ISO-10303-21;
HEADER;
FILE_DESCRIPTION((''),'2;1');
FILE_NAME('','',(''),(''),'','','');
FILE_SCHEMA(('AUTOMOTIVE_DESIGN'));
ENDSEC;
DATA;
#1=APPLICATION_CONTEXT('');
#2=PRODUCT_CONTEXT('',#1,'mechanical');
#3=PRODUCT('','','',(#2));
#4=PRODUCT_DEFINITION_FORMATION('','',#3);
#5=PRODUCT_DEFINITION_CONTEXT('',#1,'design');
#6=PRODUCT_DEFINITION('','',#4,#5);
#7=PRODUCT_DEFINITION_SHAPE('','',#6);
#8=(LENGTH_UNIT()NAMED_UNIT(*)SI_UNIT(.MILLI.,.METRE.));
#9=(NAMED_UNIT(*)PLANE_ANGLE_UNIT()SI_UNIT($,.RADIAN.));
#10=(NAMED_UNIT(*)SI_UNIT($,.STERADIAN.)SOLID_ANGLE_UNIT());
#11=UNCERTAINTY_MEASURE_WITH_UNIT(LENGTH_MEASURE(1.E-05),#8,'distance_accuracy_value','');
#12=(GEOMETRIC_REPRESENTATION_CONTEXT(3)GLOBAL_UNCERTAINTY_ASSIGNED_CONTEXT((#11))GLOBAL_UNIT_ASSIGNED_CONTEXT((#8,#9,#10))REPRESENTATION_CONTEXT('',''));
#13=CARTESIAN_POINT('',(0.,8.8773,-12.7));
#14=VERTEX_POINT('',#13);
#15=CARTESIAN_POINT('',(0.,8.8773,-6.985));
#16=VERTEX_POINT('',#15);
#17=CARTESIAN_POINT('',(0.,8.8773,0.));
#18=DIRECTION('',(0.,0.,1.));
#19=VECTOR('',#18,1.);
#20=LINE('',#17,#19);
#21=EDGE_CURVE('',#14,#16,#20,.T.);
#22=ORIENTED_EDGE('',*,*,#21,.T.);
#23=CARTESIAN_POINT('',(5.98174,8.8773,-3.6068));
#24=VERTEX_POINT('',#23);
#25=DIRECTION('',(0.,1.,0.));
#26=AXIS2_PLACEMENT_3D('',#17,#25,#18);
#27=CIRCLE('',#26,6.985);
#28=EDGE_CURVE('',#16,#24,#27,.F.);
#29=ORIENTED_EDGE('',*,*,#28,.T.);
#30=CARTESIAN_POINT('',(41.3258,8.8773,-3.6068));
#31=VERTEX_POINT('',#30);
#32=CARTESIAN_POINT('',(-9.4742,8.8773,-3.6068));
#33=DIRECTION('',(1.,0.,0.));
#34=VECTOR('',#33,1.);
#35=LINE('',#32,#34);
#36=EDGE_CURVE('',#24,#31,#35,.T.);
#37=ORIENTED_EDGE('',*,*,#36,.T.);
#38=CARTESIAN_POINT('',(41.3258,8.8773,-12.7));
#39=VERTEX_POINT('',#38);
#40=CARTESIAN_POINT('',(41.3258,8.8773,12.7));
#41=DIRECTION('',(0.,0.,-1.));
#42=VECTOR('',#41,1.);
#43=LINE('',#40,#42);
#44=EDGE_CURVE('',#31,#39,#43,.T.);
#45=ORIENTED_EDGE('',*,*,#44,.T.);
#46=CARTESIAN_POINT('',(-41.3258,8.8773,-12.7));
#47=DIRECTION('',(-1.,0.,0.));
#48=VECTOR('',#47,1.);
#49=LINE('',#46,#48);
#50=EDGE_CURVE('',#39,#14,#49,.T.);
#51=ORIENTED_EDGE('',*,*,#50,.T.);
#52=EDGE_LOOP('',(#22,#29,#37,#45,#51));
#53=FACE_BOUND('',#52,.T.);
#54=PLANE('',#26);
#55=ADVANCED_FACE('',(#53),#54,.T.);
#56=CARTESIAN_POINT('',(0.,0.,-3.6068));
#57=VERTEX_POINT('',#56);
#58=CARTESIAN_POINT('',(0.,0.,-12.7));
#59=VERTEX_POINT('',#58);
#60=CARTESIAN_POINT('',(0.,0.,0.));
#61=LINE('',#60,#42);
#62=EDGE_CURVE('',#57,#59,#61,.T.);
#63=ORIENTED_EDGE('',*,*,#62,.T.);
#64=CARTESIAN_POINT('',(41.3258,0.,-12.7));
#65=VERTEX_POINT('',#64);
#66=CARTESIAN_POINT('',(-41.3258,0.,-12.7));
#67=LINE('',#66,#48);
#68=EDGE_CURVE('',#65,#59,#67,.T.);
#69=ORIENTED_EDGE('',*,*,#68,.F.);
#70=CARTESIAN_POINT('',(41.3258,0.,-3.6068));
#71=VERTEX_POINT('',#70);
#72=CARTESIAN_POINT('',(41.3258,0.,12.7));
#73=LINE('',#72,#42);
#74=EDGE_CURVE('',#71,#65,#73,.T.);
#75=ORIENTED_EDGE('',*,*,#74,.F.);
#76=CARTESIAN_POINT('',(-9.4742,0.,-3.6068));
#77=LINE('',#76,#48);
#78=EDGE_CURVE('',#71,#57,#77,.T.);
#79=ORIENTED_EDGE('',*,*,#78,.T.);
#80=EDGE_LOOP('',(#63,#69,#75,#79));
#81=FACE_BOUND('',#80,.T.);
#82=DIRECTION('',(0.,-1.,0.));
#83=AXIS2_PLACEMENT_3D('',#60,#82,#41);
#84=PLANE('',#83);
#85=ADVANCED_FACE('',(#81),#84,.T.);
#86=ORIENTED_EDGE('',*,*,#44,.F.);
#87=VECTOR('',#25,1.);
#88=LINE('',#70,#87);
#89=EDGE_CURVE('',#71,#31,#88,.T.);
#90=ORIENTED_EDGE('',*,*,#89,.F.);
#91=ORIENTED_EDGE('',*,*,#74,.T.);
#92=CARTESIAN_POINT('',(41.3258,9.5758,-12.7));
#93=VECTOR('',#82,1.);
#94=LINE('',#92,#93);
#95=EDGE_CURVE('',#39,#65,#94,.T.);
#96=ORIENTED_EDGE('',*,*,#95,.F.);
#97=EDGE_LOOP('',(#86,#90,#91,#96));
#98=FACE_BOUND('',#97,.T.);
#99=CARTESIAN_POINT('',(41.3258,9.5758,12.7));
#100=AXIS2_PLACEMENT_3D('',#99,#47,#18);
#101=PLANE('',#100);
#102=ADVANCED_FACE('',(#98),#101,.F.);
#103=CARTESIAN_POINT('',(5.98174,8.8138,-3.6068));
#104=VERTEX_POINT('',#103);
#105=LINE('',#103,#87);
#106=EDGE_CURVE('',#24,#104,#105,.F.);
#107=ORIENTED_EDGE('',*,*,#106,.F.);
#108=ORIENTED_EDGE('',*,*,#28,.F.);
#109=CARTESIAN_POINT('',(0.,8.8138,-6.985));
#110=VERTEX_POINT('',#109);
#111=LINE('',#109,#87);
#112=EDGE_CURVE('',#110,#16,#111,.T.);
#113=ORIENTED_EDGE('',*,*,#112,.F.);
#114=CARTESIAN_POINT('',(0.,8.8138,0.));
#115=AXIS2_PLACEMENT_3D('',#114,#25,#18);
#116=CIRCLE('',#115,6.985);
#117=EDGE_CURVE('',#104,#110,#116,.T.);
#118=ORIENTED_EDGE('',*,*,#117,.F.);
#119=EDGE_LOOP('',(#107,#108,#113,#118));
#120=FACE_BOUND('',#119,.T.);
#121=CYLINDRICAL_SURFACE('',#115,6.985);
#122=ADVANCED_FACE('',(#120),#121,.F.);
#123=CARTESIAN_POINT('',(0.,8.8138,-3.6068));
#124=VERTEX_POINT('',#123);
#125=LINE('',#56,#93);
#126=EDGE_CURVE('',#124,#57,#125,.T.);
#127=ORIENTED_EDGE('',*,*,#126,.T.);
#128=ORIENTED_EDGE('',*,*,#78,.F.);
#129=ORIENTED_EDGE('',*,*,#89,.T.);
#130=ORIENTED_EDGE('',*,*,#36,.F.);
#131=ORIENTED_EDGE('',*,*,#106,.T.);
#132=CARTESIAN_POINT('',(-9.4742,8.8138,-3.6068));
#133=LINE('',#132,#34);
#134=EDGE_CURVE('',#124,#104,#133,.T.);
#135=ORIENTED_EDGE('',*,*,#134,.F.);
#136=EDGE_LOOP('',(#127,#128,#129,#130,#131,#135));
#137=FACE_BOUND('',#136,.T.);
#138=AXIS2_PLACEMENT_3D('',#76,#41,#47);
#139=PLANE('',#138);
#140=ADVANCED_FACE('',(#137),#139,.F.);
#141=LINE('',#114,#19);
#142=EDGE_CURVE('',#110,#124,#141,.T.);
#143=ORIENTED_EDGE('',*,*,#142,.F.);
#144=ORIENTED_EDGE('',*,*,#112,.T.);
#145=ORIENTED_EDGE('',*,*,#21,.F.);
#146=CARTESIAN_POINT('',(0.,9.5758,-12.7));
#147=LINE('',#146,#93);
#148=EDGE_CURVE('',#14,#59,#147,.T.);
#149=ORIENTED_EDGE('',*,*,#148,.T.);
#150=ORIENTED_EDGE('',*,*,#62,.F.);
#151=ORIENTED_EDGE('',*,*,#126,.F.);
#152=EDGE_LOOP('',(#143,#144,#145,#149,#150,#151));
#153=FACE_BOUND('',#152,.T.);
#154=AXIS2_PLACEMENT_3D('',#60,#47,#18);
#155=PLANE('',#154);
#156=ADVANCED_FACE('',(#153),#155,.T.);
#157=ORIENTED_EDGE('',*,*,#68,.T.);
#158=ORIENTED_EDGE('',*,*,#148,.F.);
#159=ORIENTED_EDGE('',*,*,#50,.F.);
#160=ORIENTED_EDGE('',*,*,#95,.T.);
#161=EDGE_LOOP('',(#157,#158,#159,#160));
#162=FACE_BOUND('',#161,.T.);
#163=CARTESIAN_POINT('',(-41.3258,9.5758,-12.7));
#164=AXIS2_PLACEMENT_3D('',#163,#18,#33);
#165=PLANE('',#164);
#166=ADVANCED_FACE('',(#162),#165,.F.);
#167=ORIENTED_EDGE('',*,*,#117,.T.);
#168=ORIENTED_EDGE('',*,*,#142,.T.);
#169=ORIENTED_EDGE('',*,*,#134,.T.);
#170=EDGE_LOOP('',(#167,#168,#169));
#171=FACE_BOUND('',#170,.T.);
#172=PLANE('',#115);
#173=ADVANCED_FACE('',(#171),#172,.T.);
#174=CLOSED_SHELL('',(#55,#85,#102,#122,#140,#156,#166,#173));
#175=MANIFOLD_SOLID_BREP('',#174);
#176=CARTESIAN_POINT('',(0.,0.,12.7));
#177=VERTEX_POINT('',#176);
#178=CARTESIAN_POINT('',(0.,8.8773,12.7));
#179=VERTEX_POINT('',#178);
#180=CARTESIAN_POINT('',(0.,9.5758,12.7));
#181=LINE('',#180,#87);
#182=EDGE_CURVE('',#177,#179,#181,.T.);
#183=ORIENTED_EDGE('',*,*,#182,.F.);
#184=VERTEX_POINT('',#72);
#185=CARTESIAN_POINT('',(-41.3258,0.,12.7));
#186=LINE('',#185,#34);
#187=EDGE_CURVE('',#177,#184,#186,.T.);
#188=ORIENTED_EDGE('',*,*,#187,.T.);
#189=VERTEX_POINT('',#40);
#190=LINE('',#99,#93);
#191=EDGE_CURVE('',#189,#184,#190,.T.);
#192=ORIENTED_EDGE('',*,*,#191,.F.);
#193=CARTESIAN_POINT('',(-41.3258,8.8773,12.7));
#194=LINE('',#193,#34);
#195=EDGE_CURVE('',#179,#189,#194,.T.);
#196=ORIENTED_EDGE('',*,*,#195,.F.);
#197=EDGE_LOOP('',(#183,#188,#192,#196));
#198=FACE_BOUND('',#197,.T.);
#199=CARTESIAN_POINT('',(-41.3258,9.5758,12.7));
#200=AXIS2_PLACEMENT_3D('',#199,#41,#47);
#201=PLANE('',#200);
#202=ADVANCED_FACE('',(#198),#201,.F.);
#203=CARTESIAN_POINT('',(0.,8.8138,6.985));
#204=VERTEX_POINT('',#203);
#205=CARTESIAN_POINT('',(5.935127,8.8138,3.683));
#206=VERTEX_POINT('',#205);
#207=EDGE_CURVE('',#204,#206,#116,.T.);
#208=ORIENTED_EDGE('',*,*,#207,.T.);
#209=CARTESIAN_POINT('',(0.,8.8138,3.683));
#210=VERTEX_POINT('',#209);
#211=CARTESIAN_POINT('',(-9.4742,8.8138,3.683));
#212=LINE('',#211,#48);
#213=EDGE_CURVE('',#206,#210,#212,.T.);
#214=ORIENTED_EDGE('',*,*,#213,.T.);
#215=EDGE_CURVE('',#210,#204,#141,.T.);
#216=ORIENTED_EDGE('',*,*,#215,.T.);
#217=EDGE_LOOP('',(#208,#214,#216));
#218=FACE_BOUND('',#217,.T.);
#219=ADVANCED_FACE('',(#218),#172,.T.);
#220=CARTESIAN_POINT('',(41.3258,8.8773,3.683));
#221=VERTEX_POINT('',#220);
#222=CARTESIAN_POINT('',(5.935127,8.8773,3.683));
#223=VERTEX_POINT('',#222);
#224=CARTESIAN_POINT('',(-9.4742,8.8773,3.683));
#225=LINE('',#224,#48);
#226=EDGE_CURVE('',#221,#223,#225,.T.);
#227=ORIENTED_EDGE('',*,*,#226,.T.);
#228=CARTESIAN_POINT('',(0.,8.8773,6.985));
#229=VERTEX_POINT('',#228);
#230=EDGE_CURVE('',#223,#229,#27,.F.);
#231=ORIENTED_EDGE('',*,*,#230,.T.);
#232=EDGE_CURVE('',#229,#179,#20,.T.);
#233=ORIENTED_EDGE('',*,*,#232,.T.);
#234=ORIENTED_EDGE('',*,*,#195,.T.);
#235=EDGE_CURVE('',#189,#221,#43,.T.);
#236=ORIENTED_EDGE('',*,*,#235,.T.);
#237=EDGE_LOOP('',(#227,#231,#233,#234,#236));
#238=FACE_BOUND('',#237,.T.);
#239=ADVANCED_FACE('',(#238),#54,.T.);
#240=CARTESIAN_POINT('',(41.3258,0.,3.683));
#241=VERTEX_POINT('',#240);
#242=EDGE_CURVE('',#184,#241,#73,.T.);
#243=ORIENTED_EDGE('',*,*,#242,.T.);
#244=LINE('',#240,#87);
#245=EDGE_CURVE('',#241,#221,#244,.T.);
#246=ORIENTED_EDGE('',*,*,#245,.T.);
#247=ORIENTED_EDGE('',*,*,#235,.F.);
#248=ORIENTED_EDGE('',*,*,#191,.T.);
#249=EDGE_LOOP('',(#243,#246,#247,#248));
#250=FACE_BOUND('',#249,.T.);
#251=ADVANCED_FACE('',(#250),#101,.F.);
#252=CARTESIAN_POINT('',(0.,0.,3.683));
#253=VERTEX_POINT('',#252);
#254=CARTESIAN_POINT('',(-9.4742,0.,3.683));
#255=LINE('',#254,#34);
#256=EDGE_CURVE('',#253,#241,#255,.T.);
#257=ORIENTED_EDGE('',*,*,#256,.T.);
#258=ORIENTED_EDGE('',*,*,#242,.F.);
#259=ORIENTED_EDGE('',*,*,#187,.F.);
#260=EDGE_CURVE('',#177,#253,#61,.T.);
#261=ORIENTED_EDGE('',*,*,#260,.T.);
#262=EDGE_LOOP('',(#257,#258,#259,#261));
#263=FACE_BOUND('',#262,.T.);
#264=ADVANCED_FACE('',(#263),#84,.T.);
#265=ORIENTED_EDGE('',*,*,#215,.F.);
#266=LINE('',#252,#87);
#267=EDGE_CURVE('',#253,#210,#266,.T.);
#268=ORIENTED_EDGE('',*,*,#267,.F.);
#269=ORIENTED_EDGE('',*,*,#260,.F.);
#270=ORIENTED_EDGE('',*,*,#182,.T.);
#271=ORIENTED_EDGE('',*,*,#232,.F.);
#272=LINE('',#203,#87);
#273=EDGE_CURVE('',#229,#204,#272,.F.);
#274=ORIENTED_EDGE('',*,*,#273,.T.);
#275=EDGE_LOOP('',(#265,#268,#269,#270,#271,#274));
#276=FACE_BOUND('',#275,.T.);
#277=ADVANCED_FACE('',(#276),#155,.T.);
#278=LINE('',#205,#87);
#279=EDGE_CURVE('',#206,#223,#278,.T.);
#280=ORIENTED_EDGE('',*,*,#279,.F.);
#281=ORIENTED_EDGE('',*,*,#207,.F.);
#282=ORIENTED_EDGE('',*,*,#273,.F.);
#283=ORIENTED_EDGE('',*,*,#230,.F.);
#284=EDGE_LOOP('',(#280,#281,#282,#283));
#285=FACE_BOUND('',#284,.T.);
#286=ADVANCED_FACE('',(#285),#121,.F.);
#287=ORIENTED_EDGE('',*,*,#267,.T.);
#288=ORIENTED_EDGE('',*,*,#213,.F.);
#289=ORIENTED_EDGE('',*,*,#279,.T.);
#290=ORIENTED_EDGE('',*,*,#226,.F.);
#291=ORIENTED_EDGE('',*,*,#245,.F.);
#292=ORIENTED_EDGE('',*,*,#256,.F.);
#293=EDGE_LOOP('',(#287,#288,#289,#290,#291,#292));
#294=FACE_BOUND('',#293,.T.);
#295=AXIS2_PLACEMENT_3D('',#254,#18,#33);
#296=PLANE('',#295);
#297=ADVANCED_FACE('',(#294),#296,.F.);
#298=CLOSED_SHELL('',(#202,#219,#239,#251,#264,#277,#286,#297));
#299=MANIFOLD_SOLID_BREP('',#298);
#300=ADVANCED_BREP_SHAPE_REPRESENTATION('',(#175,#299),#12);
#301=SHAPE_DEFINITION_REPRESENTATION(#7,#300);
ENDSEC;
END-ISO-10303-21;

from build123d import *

# Parameters (mm, degrees)
SKETCH1_W                   = 82.6516
SKETCH1_H                   = 25.4
BOSS_EXTRUDE1_DEPTH         = 9.5758
SKETCH2_W                   = 50.8
SKETCH2_H                   = 7.2898
CUT_EXTRUDE1_DEPTH          = 45.281008246
SKETCH8_W                   = 2.902818519
SKETCH8_H                   = 9.580147983
BOSS_EXTRUDE4_DEPTH         = 25.4
SKETCH10_R                  = 12.7
BOSS_EXTRUDE5_DEPTH         = 50.1015
SKETCH12_R                  = 6.985
CUT_EXTRUDE2_DEPTH          = 50.8635
CHAMFER1_SIZE               = 2.54
SKETCH14_W                  = 12.7
SKETCH14_H                  = 25.4
BOSS_EXTRUDE6_DEPTH         = 15.24
CUT_EXTRUDE3_REACH          = 81.551
SKETCH18_W                  = 5.842
SKETCH18_H                  = 11.43
F_1_4_CLEARANCE_HOLE2_D     = 6.7564
F_1_4_CLEARANCE_HOLE2_DEPTH = 20.32
F_1_4_CLEARANCE_HOLE2_TIP   = 2.029827343
CHAMFER2_SIZE               = 10.16
SKETCH21_W                  = 102.171089711
SKETCH21_H                  = 59.0255269
CUT_EXTRUDE4_DEPTH          = 50.8
SKETCH22_W                  = 33.761950456
SKETCH22_H                  = 15.29053624
CUT_EXTRUDE5_DEPTH          = 45.135226304


with BuildPart() as part:
    # Sketch1 → Boss-Extrude1 (new body)
    with BuildSketch(Plane(origin=(0, 0, 0), x_dir=(1, 0, 0), z_dir=(0, 1, 0))):
        Rectangle(SKETCH1_W, SKETCH1_H)
    extrude(amount=BOSS_EXTRUDE1_DEPTH)

    # Sketch2 → Cut-Extrude1 (cut, through all)
    with BuildSketch(Plane(origin=(0, 9.5758, 0), x_dir=(1, 0, 0), z_dir=(0, 1, 0))):
        with Locations((15.9258, -0.0381)):
            Rectangle(SKETCH2_W, SKETCH2_H)
    extrude(amount=-CUT_EXTRUDE1_DEPTH, mode=Mode.SUBTRACT)

    # Sketch8 → Boss-Extrude4 (add, through all)
    with BuildSketch(Plane.XY.offset(12.7)):
        with Locations((-1.45140926, 4.790073991)):
            Rectangle(SKETCH8_W, SKETCH8_H)
    extrude(amount=-BOSS_EXTRUDE4_DEPTH)

    # Sketch10 → Boss-Extrude5 (add)
    with BuildSketch(Plane(origin=(0, 9.5758, 0), x_dir=(1, 0, 0), z_dir=(0, 1, 0))):
        with Locations(Location((0, 0, 0), (0, 0, 270))):
            Circle(SKETCH10_R)
    extrude(amount=BOSS_EXTRUDE5_DEPTH)

    # Sketch12 → Cut-Extrude2 (cut)
    with BuildSketch(Plane(origin=(0, 59.6773, 0), x_dir=(1, 0, 0), z_dir=(0, 1, 0))):
        with Locations(Location((0, 0, 0), (0, 0, 270))):
            Circle(SKETCH12_R)
    extrude(amount=-CUT_EXTRUDE2_DEPTH, mode=Mode.SUBTRACT)

    # Chamfer1
    chamfer1_edges = [part.edges().sort_by_distance(p)[0] for p in [
        (0, 59.6773, -12.7),
    ]]
    chamfer(chamfer1_edges, length=CHAMFER1_SIZE)

    # Sketch14 → Boss-Extrude6 (add)
    with BuildSketch(Plane.XY.offset(-6.985)):
        with Locations((0, 41.790845474)):
            Rectangle(SKETCH14_W, SKETCH14_H)
    extrude(amount=-BOSS_EXTRUDE6_DEPTH)

    # Sketch18 → Cut-Extrude3 (cut, up to next)
    with BuildSketch(Plane(origin=(6.35, 0, 0), x_dir=(0, 0, -1), z_dir=(1, 0, 0)), mode=Mode.PRIVATE) as cut_extrude3_sk1:
        with Locations((16.149395763, 44.965845474)):
            Rectangle(SKETCH18_W, SKETCH18_H)
    cut_extrude3_tool1 = extrude(cut_extrude3_sk1.sketch, amount=-CUT_EXTRUDE3_REACH, mode=Mode.PRIVATE) & part.part
    add(cut_extrude3_tool1.solids().sort_by_distance((6.35, 44.965845, -16.149396))[0], mode=Mode.SUBTRACT)

    # 1/4 Clearance Hole2
    with Locations(Plane(origin=(0, 0, -22.225), x_dir=(-1, 0, 0), z_dir=(0, 0, -1))):
        with Locations((0, 44.965845474)):
            Hole(F_1_4_CLEARANCE_HOLE2_D / 2, depth=F_1_4_CLEARANCE_HOLE2_DEPTH)
            with Locations((0, 0, -(F_1_4_CLEARANCE_HOLE2_DEPTH + F_1_4_CLEARANCE_HOLE2_TIP / 2))):  # 118° drill point
                Cone(0, F_1_4_CLEARANCE_HOLE2_D / 2, F_1_4_CLEARANCE_HOLE2_TIP, mode=Mode.SUBTRACT)

    # Chamfer2
    # the kernel refuses this chamfer: 10.16 mm, written as the material it takes off along each edge
    with BuildSketch(Plane(origin=(32.478299158, 29.090845474, -22.225), x_dir=(0, -0.027495876610586265, 0.9996219169112968), z_dir=(-1, 0, 0))) as chamfer2_piece_1_section:
        Polygon((CHAMFER2_SIZE * 0.999621916911, CHAMFER2_SIZE * 0.0274958766106), (-CHAMFER2_SIZE * 0.0274958766106, CHAMFER2_SIZE * 0.999621916911), (0, 0), align=None)
    chamfer2_piece_1 = extrude(amount=64.956598315, mode=Mode.PRIVATE)
    chamfer2_piece_1 = chamfer2_piece_1 - Plane(origin=(0, 32.444576681, 0), x_dir=(0, 0, 1), z_dir=(0, -1, 0)) * Cylinder(12.7, 171, mode=Mode.PRIVATE)
    add(chamfer2_piece_1, mode=Mode.SUBTRACT)

    # Sketch21 → Cut-Extrude4 (cut)
    with BuildSketch(Plane(origin=(0, 59.6773, 0), x_dir=(1, 0, 0), z_dir=(0, 1, 0))):
        with Locations((-1.148550861, 3.01470521)):
            Rectangle(SKETCH21_W, SKETCH21_H)
    extrude(amount=-CUT_EXTRUDE4_DEPTH, mode=Mode.SUBTRACT)

    # Sketch22 → Cut-Extrude5 (cut, through all)
    with BuildSketch(Plane(origin=(0, 0, 0), x_dir=(0, 0, -1), z_dir=(1, 0, 0))):
        with Locations((-0.418536576, 4.020113424)):
            Rectangle(SKETCH22_W, SKETCH22_H)
    extrude(amount=-CUT_EXTRUDE5_DEPTH, mode=Mode.SUBTRACT)


with BuildPart() as cut_extrude5_piece_1:
    # of the separate pieces the step leaves, piece 1, a body of its own (cut_extrude5_pieces)
    add(part.part.solids().sort_by_distance((0, 0, -12.7))[0])


with BuildPart() as cut_extrude5_piece_2:
    # of the separate pieces the step leaves, piece 2, a body of its own (cut_extrude5_pieces)
    add(part.part.solids().sort_by_distance((5.935127294, 8.8773, 3.683))[0])


solid = Compound([cut_extrude5_piece_1.part, cut_extrude5_piece_2.part])
